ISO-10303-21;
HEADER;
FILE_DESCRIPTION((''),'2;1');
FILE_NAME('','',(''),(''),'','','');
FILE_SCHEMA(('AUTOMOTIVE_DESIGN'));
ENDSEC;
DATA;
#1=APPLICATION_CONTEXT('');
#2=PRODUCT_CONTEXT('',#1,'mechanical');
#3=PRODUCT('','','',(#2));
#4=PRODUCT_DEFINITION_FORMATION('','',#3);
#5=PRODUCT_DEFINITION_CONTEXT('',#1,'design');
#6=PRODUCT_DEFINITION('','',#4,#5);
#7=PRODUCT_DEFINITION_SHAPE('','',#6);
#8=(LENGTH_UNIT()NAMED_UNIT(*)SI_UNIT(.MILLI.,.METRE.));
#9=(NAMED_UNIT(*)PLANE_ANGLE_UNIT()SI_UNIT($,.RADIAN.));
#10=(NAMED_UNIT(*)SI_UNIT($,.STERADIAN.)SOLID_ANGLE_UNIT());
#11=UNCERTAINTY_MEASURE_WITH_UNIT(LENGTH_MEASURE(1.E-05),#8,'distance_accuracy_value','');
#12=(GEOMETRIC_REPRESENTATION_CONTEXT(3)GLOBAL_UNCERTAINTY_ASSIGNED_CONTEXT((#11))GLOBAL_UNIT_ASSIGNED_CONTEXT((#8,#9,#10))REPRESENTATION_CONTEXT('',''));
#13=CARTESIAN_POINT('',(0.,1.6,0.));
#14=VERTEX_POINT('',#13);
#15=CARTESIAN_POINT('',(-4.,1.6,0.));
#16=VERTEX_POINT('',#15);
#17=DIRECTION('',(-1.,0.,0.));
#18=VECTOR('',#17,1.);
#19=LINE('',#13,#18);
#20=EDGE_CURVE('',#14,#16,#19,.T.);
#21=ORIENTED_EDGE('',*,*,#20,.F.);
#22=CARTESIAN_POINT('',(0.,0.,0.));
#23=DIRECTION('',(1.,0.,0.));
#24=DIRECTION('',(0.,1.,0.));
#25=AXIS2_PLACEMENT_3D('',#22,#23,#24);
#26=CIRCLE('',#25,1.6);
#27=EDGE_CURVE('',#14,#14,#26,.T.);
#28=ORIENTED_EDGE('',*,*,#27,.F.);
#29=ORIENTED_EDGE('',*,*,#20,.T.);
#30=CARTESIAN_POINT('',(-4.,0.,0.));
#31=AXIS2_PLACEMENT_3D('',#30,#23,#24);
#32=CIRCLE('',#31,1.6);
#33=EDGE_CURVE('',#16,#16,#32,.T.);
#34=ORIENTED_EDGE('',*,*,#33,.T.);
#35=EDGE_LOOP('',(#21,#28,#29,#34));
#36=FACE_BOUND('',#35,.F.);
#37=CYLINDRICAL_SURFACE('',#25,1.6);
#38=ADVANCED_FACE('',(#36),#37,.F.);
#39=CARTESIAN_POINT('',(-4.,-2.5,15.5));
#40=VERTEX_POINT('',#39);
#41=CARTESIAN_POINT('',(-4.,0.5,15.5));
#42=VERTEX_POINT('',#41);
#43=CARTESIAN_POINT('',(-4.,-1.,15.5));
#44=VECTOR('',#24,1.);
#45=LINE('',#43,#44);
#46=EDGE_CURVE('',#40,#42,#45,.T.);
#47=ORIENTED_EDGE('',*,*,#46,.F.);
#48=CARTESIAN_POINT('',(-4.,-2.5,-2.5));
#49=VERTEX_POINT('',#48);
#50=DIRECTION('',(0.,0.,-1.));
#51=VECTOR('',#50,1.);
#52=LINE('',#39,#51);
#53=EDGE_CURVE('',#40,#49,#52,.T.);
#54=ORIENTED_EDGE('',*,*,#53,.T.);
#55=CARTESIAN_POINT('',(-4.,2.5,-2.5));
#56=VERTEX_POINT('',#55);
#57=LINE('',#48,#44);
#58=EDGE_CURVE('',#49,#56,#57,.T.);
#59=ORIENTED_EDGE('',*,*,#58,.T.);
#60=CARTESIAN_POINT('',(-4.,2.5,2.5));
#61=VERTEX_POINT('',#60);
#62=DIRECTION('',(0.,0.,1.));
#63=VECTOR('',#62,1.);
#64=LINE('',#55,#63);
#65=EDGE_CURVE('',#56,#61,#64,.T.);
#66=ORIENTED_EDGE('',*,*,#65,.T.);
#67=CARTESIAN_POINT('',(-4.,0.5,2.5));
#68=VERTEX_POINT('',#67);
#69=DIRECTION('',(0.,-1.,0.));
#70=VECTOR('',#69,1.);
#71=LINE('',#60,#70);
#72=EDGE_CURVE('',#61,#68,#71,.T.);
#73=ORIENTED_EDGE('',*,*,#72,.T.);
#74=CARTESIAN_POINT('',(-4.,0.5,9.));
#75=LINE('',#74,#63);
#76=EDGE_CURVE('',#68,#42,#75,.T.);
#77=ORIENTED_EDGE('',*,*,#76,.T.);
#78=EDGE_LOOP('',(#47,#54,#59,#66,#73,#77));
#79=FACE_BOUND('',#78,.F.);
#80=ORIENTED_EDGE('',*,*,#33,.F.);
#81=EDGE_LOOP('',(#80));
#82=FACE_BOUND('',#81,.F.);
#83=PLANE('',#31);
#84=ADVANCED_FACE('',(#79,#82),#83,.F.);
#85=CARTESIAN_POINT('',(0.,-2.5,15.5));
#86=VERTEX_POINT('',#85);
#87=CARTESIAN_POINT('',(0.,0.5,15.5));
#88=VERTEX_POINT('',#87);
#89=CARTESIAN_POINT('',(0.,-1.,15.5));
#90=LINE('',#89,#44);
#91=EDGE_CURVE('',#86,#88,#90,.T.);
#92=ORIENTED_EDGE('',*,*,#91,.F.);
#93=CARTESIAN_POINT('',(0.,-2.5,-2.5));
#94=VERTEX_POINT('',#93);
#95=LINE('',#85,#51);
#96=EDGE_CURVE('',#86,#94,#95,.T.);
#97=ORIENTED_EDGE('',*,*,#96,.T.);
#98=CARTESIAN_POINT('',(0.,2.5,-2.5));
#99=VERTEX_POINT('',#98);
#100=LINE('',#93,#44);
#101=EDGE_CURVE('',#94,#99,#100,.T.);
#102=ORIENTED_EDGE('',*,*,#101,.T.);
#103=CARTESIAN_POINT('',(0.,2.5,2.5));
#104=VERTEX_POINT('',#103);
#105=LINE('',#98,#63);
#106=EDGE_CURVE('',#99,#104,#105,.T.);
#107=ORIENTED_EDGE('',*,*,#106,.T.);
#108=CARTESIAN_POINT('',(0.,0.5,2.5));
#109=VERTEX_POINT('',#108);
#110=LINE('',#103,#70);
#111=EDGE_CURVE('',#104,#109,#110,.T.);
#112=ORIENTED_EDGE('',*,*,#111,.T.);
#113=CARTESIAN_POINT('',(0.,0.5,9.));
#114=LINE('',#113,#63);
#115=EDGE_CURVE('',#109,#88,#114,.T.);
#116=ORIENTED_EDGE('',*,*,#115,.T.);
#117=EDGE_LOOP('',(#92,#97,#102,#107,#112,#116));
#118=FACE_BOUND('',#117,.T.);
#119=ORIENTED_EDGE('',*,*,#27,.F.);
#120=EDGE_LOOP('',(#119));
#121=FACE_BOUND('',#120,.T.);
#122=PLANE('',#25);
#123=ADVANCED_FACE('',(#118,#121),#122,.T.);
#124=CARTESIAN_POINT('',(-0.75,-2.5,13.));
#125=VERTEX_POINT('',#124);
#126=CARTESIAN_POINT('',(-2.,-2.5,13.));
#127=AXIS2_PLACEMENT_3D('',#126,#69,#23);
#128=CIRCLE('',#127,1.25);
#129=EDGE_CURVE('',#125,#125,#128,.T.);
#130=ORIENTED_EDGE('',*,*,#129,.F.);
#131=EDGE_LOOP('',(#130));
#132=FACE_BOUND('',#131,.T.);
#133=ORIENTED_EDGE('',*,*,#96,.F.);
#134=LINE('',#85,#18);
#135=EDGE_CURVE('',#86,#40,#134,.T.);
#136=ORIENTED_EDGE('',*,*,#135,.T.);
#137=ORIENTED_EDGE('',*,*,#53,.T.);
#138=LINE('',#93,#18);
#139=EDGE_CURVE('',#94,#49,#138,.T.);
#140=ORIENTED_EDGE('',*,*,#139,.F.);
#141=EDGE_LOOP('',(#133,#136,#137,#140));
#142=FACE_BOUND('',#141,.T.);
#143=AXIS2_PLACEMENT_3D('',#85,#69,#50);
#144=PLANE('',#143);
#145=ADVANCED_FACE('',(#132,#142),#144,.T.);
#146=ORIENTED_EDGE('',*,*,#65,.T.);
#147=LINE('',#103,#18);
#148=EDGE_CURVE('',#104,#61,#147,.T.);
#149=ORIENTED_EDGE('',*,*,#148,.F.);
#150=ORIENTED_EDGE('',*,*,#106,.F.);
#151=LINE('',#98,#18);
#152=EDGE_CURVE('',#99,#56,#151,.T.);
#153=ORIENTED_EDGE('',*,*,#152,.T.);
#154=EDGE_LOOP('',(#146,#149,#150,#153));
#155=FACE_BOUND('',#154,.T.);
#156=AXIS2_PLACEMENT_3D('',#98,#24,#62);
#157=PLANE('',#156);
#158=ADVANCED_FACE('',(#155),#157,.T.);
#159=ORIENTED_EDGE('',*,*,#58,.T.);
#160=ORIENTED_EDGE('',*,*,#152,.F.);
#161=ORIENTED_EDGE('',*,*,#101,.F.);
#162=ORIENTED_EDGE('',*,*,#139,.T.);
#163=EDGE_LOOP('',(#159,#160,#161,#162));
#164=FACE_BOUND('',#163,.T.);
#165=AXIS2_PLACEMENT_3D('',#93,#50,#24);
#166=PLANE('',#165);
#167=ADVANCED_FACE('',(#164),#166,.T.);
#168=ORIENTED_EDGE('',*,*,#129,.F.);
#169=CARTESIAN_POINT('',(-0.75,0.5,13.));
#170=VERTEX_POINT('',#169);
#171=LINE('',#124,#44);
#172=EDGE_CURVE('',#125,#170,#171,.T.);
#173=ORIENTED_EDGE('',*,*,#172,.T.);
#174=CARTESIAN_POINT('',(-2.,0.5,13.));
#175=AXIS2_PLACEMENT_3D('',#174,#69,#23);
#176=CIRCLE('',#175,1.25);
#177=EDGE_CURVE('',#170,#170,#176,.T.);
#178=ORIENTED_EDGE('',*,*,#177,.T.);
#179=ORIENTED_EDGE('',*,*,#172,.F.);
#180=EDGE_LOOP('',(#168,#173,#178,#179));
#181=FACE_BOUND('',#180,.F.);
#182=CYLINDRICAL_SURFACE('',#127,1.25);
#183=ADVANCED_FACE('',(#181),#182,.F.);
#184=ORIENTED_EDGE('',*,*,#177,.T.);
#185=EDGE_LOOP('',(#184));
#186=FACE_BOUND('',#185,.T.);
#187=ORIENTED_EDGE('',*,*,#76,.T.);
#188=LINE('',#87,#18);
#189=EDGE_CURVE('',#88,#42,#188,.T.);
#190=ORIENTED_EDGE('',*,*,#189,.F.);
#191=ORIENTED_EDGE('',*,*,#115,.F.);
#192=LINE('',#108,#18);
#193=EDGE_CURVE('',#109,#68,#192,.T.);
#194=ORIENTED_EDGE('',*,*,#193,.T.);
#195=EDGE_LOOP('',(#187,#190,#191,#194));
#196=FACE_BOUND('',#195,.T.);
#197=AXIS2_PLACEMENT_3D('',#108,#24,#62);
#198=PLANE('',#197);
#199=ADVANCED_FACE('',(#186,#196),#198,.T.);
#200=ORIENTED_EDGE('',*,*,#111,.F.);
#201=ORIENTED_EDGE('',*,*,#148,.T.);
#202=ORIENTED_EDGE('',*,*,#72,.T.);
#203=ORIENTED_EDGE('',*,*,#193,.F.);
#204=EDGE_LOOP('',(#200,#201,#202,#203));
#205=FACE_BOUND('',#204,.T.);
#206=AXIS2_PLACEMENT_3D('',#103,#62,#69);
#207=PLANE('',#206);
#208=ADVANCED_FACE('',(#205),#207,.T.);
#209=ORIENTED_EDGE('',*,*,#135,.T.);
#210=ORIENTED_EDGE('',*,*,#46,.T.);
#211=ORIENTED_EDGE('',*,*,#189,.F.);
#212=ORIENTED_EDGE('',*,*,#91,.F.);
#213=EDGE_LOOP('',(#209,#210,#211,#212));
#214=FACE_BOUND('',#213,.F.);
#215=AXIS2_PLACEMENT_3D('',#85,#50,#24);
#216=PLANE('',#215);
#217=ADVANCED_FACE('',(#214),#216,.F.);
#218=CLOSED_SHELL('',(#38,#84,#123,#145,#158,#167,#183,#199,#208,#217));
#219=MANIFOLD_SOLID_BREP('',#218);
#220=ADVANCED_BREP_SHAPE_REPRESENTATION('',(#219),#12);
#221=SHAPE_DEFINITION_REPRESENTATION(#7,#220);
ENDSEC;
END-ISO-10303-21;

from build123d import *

# Parameters (mm, degrees)
F0_R     = 1.6
F0_W     = 3
F0_H     = 13
F1_DEPTH = 4
F2_R     = 1.25
F3_DEPTH = 25


# Not quite as in the source:
# - a feature names something its author has since deleted; it is built from what else it names


with BuildPart() as f1:
    # F0 (on Right) → F1 (new body)
    with BuildSketch(Plane.YZ):
        Polygon((-2.5, -2.5), (2.5, -2.5), (2.5, 2.5), (0.5, 2.5), (-2.5, 2.5), align=None)
        Circle(F0_R, mode=Mode.SUBTRACT)
        with Locations((-1, 9)):
            Rectangle(F0_W, F0_H)
    extrude(amount=-F1_DEPTH)

    # F2 (on face) → F3 (cut)
    with BuildSketch(Plane.XZ.offset(2.5)):
        with Locations((-2, 13)):
            Circle(F2_R)
    extrude(amount=-F3_DEPTH, mode=Mode.SUBTRACT)


solid = f1.part
